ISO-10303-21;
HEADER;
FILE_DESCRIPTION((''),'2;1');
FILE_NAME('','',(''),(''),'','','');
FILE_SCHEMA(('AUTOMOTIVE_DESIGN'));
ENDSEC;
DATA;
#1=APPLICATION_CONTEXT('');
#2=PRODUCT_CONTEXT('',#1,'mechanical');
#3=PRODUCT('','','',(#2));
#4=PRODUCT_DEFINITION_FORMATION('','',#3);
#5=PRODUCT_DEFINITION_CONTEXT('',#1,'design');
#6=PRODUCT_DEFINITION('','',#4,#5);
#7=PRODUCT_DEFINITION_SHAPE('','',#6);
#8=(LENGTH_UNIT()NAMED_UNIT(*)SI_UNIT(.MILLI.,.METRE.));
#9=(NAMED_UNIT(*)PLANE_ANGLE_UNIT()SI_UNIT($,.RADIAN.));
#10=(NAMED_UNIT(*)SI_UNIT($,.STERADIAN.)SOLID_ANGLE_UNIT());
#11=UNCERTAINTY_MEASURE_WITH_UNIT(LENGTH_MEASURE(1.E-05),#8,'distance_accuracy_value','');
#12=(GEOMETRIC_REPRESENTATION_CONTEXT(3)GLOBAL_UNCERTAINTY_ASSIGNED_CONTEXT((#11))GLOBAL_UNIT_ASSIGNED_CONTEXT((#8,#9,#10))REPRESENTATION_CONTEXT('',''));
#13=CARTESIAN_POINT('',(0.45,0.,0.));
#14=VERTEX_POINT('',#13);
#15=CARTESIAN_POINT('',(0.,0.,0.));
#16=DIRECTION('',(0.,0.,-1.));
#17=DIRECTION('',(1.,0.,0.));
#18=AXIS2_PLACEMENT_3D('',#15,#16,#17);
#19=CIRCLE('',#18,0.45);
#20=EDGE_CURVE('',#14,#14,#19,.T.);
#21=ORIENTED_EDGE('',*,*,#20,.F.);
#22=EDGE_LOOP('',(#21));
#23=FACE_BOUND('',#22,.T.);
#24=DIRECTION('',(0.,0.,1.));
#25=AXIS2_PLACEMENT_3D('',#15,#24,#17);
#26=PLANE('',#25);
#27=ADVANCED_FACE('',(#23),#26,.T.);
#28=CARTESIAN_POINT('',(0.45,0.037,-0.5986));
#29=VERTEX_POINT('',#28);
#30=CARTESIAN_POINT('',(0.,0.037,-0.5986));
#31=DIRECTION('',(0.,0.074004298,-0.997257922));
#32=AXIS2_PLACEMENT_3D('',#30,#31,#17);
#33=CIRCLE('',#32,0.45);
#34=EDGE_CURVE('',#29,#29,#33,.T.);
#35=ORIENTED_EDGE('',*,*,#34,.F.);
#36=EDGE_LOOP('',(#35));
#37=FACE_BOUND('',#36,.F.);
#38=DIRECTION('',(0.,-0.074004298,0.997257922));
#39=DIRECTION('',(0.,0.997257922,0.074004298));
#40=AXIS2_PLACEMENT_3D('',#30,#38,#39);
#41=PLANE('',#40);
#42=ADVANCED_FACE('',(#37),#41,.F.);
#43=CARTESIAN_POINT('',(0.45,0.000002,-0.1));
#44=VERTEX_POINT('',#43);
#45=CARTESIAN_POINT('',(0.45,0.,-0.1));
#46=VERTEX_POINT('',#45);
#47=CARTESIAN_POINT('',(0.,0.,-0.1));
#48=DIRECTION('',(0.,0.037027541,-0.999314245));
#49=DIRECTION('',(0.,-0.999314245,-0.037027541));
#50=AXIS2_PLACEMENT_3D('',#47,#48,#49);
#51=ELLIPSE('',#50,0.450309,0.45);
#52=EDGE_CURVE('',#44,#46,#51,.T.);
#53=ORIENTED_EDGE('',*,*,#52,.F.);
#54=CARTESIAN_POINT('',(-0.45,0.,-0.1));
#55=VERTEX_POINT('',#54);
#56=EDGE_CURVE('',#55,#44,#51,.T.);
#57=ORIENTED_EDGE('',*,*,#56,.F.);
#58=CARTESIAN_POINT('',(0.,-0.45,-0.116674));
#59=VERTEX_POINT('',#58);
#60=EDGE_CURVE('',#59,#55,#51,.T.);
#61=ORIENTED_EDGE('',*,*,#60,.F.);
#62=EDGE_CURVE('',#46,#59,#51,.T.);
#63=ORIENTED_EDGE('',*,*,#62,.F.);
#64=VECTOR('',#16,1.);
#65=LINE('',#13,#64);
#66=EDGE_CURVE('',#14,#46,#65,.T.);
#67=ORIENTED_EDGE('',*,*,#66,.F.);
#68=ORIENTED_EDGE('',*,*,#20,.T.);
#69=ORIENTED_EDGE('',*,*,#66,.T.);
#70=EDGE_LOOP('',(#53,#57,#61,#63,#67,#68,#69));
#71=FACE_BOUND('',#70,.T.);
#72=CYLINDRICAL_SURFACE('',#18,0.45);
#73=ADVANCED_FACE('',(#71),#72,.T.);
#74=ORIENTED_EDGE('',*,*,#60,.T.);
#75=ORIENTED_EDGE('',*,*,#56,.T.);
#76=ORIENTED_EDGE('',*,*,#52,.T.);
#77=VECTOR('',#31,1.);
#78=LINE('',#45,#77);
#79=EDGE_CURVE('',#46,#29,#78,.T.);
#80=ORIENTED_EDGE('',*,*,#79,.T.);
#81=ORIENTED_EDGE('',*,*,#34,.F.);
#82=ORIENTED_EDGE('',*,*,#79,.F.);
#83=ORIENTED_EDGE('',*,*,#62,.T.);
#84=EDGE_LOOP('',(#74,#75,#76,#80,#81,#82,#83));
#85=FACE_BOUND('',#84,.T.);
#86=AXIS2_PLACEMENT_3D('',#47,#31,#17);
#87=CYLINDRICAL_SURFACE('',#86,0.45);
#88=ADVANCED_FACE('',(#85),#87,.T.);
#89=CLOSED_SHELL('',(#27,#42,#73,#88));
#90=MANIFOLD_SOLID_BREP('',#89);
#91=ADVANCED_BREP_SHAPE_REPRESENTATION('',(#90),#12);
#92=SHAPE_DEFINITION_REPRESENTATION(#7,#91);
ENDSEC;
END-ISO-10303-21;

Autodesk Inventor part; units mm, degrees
ref_plane "YZ Plane" through (0, 0, 0) normal (1, 0, 0) x (0, 1, 0)
ref_plane "XZ Plane" through (0, 0, 0) normal (0, 1, 0) x (-1, 0, 0)
ref_plane "XY Plane" through (0, 0, 0) normal (0, 0, 1) x (1, 0, 0)
sketch "Sketch1" plane through (0, 0, 0) normal (1, 0, 0) x (0, 1, 0)
  line L0 (0, 0) -> (0, -0.1)
  line L1 (0, -0.1) -> (0.037, -0.5986)
  dimension "d7" = 0.1
  dimension "d15" = 0.5
sketch "Sketch2" plane through (0, 0, 0) normal (0, 0, 1) x (1, 0, 0)
  circle A0 centre (0, 0) radius 0.45
  dimension "d1" = 0.9
sweep "Sweep4" add profiles "Sketch2" path "Sketch1"
sketch "Sketch3" plane through (0, 0, 0) normal (0, 1, 0) x (-1, 0, 0)
  ellipse E0 centre (0, -0.5986) end of major axis (-0.45, -0.5986) minor radius 0.0333 projected
  line L0 (0, -0.5986) -> (2.9723, -7.0817)
  line L1 (0, -0.5986) -> (0, -5.327)
  point P0 (0, 0)
  dimension "d18" = 24.63
  dimension "d19" = 7.132
properties part number "cable medio, anular"
